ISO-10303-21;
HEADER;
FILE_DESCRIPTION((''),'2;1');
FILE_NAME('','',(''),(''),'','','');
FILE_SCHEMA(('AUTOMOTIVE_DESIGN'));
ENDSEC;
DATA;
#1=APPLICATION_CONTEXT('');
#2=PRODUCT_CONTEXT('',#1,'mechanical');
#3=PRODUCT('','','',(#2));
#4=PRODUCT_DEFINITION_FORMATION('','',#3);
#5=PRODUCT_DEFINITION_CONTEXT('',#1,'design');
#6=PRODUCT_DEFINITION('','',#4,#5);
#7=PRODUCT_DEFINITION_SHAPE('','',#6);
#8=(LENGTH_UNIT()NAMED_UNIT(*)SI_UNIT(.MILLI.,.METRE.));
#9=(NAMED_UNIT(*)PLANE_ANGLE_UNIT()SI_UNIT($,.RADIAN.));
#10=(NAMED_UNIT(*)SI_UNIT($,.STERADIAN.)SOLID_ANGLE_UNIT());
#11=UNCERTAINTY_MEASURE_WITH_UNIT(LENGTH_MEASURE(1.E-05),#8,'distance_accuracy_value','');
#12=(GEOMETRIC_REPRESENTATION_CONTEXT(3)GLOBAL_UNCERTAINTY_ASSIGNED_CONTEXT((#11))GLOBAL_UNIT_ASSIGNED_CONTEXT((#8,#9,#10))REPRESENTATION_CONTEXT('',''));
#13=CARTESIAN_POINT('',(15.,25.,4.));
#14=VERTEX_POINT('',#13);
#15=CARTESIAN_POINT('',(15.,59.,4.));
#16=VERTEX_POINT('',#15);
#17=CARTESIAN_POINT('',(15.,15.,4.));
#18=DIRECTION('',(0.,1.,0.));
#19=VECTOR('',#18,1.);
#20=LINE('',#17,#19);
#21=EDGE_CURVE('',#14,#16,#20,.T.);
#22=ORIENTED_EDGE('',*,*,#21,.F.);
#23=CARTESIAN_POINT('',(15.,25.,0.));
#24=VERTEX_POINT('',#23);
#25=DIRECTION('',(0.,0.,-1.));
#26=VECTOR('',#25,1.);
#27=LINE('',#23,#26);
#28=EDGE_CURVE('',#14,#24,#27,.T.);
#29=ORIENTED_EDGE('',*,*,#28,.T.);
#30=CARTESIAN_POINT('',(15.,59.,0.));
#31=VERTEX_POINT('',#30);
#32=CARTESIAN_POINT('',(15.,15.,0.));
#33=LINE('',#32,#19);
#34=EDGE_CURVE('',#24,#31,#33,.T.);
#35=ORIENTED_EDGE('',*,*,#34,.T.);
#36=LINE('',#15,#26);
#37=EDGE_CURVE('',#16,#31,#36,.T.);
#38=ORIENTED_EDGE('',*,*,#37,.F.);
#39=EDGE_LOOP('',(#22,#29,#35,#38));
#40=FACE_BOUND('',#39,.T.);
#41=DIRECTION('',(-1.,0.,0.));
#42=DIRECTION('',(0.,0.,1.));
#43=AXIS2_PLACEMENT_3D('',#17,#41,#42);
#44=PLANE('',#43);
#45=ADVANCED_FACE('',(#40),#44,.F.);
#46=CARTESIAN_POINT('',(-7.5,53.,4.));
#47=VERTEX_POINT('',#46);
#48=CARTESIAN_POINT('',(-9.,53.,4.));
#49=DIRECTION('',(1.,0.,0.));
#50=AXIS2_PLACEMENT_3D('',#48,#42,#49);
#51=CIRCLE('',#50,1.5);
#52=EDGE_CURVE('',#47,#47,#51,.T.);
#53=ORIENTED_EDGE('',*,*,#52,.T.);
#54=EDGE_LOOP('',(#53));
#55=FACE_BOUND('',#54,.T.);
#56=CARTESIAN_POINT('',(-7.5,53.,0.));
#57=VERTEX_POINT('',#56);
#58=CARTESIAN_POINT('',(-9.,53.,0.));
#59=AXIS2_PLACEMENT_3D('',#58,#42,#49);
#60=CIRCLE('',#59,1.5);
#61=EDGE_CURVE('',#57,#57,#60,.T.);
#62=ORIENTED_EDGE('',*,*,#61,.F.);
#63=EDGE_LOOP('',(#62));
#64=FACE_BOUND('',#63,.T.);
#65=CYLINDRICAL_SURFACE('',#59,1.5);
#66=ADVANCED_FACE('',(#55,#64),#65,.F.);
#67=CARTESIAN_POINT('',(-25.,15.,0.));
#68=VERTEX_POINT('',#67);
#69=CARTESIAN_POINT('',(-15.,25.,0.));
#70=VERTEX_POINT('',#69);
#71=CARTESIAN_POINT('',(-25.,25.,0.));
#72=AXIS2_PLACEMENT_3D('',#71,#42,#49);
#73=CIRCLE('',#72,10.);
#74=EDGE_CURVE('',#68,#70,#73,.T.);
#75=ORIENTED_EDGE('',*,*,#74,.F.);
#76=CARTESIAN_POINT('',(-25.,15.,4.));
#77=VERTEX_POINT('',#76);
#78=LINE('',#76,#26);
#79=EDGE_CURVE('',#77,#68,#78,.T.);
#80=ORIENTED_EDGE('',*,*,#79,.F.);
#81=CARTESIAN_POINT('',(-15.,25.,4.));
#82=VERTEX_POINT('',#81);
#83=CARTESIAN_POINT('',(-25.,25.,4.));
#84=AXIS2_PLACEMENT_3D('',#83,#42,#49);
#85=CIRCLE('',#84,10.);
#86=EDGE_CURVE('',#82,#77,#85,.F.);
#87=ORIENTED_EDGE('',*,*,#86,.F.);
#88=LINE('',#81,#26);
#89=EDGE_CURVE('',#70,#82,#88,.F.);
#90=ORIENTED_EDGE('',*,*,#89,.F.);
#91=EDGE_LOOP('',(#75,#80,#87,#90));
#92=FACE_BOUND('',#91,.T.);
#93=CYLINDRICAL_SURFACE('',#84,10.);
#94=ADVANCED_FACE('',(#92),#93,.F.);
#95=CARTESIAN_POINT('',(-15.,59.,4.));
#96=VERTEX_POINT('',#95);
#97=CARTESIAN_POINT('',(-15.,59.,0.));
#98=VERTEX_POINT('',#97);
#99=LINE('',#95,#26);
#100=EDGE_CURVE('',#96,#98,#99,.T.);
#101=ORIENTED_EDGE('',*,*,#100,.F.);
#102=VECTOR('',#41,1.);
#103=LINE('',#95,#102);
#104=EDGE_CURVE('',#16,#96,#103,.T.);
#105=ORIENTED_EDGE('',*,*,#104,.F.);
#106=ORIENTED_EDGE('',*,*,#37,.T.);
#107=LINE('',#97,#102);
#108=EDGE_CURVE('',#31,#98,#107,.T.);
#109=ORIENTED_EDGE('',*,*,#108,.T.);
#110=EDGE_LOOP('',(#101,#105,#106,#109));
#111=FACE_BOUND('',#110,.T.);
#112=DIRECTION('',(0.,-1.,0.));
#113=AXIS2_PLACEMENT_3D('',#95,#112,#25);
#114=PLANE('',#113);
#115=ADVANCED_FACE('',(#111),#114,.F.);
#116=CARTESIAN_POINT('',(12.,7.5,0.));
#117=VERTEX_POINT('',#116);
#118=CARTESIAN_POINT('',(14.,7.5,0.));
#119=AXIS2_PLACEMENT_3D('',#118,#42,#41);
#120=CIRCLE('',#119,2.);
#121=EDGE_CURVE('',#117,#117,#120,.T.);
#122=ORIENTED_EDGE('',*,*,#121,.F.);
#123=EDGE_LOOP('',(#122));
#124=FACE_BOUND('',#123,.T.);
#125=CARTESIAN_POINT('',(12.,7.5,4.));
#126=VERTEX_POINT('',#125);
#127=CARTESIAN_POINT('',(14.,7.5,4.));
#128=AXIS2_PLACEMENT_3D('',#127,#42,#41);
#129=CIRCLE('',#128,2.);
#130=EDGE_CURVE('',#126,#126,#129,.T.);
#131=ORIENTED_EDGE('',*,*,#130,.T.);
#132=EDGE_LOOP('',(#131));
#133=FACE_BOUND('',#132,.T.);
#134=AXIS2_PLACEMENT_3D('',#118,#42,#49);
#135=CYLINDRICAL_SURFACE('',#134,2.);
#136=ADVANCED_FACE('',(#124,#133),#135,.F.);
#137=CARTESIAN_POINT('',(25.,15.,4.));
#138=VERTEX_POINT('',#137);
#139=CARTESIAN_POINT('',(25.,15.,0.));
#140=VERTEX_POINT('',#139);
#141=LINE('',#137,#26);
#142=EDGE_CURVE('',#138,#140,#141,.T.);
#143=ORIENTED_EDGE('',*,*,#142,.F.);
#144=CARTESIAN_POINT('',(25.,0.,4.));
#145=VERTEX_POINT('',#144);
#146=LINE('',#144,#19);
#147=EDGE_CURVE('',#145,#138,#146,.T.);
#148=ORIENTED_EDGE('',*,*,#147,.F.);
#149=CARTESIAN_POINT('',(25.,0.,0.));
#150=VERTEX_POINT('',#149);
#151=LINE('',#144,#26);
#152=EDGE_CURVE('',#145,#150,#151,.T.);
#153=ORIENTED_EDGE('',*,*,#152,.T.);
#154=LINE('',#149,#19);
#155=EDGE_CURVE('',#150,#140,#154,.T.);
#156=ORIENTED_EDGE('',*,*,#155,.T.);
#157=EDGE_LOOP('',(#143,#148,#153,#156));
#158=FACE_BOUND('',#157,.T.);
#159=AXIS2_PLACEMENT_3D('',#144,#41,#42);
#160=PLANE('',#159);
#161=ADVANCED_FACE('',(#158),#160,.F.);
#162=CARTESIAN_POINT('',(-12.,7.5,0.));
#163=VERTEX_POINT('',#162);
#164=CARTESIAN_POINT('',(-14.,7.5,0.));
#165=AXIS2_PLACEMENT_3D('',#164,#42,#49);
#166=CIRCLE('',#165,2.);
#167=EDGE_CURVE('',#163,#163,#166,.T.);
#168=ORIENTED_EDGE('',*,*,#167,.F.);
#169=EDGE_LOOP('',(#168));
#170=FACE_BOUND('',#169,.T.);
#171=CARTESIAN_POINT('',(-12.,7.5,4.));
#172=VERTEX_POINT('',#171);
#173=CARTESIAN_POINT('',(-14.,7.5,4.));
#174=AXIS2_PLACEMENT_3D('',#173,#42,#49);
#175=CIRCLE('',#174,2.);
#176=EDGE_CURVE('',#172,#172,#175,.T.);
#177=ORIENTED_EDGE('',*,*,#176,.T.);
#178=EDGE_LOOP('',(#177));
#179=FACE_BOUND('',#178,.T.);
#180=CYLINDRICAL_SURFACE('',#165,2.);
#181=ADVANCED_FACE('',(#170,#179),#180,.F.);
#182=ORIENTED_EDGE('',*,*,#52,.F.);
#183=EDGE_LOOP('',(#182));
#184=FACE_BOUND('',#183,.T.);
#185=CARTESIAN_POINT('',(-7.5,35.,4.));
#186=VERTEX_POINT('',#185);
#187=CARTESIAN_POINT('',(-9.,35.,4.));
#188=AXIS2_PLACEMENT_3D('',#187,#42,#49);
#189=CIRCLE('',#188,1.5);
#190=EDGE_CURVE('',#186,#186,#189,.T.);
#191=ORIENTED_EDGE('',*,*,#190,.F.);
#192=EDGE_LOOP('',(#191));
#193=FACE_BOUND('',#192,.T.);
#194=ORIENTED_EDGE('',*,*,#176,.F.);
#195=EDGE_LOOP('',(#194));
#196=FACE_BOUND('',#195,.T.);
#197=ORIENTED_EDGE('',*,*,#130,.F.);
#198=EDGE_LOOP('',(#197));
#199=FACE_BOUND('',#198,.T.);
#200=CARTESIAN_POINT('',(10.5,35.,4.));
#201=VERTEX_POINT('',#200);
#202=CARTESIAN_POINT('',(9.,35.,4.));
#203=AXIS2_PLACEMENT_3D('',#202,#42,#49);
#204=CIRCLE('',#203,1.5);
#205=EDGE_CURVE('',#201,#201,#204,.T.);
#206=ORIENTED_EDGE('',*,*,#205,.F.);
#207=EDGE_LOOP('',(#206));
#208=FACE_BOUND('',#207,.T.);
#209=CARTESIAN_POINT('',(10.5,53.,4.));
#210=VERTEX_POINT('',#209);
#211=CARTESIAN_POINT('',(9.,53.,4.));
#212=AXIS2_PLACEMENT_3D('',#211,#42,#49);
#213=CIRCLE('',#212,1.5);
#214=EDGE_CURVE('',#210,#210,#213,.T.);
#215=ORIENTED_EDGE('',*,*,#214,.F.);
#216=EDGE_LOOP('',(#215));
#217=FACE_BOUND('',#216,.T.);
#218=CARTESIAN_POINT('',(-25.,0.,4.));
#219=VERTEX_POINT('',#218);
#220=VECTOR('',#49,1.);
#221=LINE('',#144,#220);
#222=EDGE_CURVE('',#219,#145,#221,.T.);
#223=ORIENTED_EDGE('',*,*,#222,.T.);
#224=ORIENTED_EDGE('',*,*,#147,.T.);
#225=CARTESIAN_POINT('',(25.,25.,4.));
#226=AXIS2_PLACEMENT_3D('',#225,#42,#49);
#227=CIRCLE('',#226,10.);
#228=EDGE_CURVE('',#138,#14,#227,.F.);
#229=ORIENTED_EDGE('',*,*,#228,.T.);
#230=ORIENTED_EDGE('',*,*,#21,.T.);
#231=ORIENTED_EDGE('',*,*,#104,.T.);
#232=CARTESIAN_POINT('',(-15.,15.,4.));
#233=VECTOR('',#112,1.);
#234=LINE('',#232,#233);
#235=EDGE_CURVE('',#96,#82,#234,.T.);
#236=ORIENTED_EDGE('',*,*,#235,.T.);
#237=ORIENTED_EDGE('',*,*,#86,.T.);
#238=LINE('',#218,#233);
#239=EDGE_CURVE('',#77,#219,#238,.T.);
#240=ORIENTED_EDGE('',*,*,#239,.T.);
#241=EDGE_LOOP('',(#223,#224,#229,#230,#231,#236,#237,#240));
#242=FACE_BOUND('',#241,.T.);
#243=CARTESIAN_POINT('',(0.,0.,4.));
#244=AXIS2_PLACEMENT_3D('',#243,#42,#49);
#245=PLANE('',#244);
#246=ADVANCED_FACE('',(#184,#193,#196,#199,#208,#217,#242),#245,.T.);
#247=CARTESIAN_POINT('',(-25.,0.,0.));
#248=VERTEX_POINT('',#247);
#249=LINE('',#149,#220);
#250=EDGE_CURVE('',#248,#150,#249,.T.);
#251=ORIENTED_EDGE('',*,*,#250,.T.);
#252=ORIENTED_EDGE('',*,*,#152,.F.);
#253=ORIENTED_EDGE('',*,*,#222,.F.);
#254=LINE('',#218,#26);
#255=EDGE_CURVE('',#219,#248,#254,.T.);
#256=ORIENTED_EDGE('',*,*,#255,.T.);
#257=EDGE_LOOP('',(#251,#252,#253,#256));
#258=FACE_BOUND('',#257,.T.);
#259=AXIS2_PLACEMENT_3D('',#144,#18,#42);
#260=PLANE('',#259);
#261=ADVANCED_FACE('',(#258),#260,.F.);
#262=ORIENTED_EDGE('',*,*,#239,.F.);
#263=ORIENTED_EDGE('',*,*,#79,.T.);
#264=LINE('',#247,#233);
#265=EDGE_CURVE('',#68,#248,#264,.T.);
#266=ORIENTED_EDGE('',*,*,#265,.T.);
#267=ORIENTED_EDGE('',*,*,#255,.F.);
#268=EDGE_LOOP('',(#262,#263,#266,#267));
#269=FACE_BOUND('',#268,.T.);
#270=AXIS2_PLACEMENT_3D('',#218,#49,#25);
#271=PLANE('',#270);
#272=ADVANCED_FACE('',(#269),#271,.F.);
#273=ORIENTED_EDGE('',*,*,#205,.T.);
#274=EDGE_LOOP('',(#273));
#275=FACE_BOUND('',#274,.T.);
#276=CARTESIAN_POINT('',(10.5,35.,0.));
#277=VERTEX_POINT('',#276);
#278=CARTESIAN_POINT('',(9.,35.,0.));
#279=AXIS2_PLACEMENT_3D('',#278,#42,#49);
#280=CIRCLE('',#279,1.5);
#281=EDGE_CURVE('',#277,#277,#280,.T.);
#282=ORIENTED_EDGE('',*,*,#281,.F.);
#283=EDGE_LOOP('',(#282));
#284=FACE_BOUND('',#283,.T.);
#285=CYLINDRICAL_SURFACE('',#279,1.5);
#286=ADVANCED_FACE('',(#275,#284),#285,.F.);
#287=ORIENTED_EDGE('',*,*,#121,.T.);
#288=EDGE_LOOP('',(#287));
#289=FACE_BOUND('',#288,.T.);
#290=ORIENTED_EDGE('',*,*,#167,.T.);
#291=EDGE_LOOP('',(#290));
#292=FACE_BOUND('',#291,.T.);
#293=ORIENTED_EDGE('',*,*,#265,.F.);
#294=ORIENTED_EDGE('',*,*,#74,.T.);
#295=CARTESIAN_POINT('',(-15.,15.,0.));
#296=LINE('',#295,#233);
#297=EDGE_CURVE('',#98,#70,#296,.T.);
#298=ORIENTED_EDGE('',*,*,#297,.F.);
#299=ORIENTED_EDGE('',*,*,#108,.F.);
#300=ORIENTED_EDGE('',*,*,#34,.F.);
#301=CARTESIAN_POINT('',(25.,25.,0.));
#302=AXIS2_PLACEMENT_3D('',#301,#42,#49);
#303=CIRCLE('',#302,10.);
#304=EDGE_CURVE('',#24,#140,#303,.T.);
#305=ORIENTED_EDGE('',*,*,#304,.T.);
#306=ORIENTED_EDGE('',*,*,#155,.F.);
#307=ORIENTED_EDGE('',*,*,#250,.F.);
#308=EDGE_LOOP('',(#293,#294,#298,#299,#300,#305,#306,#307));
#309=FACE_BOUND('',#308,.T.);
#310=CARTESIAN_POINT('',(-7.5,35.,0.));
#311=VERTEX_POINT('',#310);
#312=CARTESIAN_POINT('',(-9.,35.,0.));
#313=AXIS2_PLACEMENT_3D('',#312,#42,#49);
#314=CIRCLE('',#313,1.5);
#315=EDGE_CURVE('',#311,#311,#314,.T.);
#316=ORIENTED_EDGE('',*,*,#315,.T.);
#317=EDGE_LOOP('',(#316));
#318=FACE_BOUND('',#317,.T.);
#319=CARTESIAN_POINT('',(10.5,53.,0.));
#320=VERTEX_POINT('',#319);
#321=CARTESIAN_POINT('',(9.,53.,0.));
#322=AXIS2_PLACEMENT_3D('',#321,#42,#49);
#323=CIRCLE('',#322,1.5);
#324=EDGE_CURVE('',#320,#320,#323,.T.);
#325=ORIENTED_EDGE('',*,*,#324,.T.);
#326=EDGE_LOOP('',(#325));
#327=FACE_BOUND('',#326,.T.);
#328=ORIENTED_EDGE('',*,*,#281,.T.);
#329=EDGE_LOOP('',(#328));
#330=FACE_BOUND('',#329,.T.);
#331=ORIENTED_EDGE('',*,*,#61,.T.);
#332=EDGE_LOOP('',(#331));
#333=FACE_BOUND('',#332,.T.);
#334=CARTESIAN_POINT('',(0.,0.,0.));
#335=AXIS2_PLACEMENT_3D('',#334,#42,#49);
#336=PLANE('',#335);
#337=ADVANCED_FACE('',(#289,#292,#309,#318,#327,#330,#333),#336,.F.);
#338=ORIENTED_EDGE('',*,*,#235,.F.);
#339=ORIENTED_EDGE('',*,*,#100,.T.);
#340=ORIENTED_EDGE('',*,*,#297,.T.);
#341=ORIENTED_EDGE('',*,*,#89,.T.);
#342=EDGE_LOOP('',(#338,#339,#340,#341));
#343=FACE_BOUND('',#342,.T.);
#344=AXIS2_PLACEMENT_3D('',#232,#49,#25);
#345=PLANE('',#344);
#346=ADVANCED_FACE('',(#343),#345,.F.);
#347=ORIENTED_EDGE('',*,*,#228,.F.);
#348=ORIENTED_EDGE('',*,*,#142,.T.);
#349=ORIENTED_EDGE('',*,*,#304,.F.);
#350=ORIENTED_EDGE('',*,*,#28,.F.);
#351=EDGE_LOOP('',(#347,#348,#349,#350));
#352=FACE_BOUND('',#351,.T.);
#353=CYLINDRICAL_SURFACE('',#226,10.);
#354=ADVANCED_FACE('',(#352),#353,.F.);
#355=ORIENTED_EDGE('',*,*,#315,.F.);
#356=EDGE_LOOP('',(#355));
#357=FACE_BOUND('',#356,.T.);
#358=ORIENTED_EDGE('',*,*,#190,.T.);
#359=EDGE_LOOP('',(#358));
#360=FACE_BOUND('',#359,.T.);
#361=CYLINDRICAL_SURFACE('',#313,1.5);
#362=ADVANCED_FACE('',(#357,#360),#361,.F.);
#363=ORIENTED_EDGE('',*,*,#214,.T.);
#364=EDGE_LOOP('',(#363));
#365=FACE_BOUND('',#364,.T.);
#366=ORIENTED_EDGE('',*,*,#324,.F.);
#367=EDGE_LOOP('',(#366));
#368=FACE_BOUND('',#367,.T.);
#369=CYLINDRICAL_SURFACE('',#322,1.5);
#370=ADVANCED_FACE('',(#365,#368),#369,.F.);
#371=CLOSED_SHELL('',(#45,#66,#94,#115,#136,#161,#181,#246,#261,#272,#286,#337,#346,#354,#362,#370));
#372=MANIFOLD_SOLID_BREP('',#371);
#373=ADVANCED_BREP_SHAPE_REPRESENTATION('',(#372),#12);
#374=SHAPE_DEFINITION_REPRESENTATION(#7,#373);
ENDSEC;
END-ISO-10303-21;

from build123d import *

# Parameters (mm, degrees)
EXTRUDE_1_DEPTH     = 4
SKETCH_2_R          = 1.5
CUT_EXTRUDE_1_DEPTH = 65.202803677
SKETCH_3_R          = 2
CUT_EXTRUDE_2_DEPTH = 65.202803677
FILLET_1_R          = 10


with BuildPart() as part:
    # 草图1 → 凸台-拉伸1 (new body)
    with BuildSketch(Plane.XY):
        Polygon((25, 0), (-25, 0), (-25, 15), (-15, 15), (-15, 59), (15, 59), (15, 15), (25, 15), align=None)
    extrude(amount=EXTRUDE_1_DEPTH)

    # 草图2 → 切除-拉伸1 (cut, through all)
    with BuildSketch(Plane.XY.offset(4)):
        with Locations((-9, 53)):
            Circle(SKETCH_2_R)
        with Locations((-9, 35)):
            Circle(SKETCH_2_R)
        with Locations((9, 35)):
            Circle(SKETCH_2_R)
        with Locations((9, 53)):
            Circle(SKETCH_2_R)
    extrude(amount=-CUT_EXTRUDE_1_DEPTH, mode=Mode.SUBTRACT)

    # 草图3 → 切除-拉伸2 (cut, through all)
    with BuildSketch(Plane.XY.offset(4)):
        with Locations((-14, 7.5)):
            Circle(SKETCH_3_R)
        with Locations(Location((14, 7.5, 0), (0, 0, 180))):
            Circle(SKETCH_3_R)
    extrude(amount=-CUT_EXTRUDE_2_DEPTH, mode=Mode.SUBTRACT)

    # 圆角1
    fillet_1_edges = [part.edges().sort_by_distance(p)[0] for p in [
        (-15, 15, 2),
        (15, 15, 2),
    ]]
    fillet(fillet_1_edges, radius=FILLET_1_R - 0.0001)  # a hair under: the kernel refuses the full size


solid = part.part
